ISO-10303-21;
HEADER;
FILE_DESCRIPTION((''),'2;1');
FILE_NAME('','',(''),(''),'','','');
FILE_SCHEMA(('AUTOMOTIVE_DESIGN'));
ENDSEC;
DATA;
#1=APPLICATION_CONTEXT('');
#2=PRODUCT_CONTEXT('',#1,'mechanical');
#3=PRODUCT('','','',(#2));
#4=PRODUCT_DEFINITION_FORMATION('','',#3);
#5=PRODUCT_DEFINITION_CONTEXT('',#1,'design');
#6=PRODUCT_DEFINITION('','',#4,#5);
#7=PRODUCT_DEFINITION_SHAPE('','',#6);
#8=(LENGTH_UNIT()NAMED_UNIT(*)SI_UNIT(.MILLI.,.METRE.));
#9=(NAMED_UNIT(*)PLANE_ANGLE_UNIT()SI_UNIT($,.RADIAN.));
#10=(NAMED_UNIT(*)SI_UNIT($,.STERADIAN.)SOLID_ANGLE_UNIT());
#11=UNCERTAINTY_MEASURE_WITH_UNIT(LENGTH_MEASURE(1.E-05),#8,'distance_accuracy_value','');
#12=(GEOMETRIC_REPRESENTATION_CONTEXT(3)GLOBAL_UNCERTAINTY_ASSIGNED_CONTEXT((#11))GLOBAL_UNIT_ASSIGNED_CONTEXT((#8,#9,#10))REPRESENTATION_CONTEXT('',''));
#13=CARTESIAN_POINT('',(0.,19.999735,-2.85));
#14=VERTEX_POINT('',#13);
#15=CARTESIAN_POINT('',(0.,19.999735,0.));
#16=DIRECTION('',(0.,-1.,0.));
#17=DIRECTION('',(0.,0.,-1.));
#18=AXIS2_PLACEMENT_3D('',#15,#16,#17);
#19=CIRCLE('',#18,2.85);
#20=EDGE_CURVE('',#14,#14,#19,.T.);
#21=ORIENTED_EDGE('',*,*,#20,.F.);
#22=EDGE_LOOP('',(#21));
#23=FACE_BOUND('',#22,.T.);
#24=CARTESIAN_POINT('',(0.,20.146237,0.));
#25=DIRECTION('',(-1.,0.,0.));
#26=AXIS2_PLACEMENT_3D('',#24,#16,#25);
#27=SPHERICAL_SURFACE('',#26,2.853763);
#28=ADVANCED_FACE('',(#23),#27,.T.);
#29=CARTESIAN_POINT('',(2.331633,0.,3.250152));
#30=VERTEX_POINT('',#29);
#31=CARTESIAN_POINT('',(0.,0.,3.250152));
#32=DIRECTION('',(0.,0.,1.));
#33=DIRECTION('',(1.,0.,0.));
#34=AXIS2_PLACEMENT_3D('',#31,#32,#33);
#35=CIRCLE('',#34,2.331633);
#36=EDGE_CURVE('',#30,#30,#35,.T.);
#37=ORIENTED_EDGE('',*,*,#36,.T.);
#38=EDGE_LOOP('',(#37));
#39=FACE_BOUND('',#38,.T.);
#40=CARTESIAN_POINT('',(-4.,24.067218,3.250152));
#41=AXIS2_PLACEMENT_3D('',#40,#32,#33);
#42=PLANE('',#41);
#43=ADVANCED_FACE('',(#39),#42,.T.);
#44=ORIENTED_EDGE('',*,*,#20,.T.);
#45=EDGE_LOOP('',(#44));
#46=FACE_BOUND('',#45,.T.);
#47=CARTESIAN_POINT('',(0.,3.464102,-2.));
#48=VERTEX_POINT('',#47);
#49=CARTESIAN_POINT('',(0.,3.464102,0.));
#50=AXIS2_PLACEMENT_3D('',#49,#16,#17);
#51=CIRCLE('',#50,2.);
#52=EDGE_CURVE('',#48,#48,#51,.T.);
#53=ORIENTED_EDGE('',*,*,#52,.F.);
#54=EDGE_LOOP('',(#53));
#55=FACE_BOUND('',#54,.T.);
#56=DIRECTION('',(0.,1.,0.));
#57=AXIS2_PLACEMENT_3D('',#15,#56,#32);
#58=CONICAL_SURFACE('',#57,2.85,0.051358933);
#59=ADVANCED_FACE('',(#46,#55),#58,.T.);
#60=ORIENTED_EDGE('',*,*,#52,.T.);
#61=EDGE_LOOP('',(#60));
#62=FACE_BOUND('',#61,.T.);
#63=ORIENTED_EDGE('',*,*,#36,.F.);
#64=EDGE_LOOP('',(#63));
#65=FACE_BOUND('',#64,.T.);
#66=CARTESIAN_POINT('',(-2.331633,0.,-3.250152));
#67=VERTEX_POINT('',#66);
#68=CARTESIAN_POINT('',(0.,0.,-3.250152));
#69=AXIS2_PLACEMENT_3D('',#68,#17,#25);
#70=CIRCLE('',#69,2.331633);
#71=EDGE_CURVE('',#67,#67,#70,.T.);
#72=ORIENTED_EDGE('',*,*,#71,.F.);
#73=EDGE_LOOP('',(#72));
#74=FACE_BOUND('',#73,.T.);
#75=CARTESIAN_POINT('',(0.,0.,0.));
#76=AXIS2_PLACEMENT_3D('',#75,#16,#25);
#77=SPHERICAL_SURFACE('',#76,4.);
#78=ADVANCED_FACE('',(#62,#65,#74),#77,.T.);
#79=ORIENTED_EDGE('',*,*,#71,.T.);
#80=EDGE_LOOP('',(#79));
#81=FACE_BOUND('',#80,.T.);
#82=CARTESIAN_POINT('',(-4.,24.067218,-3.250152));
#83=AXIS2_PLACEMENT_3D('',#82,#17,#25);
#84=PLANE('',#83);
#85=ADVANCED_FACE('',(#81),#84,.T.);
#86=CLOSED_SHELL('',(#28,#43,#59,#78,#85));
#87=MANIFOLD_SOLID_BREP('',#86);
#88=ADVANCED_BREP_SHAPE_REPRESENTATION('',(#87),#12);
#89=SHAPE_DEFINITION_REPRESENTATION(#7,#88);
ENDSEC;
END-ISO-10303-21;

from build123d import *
from build123d.topology import SkipClean

# Parameters (mm, degrees)
CUT_EXTRUDE2_START     = -2.331632996
CUT_EXTRUDE2_OUTLINE_W = 1.749848069
CUT_EXTRUDE2_OUTLINE_H = 8
CUT_EXTRUDE2_DEPTH     = 4.663265992


# Read off the part's stored shape, not the designer's step: Cut-Extrude2
with BuildPart() as part:
    # Sketch1 → Revolve1 (revolve)
    with BuildSketch(Plane.XY):
        with BuildLine():
            Line((-2.85, 19.999735291), (-2, 3.464101615))
            ThreePointArc((-2, 3.464101615), (-3.863703305, -1.03527618), (0, -4))
            Line((0, -4), (0, 23))
            ThreePointArc((0, 23), (-2.069063093, 22.1116736), (-2.85, 19.999735291))
        make_face()
    revolve(axis=Axis((0, 0, 0), (0, 1, 0)))

    # Cut-Extrude2 outline → Cut-Extrude2 (cut)
    with SkipClean():  # the faces are left unmerged after this step: merging them gives an invalid solid
        with BuildSketch(Plane(origin=(0, 0, 0), x_dir=(0, 0, -1), z_dir=(1, 0, 0)).offset(CUT_EXTRUDE2_START)):
            with Locations((4.125075965, 0)):
                Rectangle(CUT_EXTRUDE2_OUTLINE_W, CUT_EXTRUDE2_OUTLINE_H)
            with Locations((-4.125075965, 0)):
                Rectangle(CUT_EXTRUDE2_OUTLINE_W, CUT_EXTRUDE2_OUTLINE_H)
        extrude(amount=CUT_EXTRUDE2_DEPTH, mode=Mode.SUBTRACT)


solid = part.part
